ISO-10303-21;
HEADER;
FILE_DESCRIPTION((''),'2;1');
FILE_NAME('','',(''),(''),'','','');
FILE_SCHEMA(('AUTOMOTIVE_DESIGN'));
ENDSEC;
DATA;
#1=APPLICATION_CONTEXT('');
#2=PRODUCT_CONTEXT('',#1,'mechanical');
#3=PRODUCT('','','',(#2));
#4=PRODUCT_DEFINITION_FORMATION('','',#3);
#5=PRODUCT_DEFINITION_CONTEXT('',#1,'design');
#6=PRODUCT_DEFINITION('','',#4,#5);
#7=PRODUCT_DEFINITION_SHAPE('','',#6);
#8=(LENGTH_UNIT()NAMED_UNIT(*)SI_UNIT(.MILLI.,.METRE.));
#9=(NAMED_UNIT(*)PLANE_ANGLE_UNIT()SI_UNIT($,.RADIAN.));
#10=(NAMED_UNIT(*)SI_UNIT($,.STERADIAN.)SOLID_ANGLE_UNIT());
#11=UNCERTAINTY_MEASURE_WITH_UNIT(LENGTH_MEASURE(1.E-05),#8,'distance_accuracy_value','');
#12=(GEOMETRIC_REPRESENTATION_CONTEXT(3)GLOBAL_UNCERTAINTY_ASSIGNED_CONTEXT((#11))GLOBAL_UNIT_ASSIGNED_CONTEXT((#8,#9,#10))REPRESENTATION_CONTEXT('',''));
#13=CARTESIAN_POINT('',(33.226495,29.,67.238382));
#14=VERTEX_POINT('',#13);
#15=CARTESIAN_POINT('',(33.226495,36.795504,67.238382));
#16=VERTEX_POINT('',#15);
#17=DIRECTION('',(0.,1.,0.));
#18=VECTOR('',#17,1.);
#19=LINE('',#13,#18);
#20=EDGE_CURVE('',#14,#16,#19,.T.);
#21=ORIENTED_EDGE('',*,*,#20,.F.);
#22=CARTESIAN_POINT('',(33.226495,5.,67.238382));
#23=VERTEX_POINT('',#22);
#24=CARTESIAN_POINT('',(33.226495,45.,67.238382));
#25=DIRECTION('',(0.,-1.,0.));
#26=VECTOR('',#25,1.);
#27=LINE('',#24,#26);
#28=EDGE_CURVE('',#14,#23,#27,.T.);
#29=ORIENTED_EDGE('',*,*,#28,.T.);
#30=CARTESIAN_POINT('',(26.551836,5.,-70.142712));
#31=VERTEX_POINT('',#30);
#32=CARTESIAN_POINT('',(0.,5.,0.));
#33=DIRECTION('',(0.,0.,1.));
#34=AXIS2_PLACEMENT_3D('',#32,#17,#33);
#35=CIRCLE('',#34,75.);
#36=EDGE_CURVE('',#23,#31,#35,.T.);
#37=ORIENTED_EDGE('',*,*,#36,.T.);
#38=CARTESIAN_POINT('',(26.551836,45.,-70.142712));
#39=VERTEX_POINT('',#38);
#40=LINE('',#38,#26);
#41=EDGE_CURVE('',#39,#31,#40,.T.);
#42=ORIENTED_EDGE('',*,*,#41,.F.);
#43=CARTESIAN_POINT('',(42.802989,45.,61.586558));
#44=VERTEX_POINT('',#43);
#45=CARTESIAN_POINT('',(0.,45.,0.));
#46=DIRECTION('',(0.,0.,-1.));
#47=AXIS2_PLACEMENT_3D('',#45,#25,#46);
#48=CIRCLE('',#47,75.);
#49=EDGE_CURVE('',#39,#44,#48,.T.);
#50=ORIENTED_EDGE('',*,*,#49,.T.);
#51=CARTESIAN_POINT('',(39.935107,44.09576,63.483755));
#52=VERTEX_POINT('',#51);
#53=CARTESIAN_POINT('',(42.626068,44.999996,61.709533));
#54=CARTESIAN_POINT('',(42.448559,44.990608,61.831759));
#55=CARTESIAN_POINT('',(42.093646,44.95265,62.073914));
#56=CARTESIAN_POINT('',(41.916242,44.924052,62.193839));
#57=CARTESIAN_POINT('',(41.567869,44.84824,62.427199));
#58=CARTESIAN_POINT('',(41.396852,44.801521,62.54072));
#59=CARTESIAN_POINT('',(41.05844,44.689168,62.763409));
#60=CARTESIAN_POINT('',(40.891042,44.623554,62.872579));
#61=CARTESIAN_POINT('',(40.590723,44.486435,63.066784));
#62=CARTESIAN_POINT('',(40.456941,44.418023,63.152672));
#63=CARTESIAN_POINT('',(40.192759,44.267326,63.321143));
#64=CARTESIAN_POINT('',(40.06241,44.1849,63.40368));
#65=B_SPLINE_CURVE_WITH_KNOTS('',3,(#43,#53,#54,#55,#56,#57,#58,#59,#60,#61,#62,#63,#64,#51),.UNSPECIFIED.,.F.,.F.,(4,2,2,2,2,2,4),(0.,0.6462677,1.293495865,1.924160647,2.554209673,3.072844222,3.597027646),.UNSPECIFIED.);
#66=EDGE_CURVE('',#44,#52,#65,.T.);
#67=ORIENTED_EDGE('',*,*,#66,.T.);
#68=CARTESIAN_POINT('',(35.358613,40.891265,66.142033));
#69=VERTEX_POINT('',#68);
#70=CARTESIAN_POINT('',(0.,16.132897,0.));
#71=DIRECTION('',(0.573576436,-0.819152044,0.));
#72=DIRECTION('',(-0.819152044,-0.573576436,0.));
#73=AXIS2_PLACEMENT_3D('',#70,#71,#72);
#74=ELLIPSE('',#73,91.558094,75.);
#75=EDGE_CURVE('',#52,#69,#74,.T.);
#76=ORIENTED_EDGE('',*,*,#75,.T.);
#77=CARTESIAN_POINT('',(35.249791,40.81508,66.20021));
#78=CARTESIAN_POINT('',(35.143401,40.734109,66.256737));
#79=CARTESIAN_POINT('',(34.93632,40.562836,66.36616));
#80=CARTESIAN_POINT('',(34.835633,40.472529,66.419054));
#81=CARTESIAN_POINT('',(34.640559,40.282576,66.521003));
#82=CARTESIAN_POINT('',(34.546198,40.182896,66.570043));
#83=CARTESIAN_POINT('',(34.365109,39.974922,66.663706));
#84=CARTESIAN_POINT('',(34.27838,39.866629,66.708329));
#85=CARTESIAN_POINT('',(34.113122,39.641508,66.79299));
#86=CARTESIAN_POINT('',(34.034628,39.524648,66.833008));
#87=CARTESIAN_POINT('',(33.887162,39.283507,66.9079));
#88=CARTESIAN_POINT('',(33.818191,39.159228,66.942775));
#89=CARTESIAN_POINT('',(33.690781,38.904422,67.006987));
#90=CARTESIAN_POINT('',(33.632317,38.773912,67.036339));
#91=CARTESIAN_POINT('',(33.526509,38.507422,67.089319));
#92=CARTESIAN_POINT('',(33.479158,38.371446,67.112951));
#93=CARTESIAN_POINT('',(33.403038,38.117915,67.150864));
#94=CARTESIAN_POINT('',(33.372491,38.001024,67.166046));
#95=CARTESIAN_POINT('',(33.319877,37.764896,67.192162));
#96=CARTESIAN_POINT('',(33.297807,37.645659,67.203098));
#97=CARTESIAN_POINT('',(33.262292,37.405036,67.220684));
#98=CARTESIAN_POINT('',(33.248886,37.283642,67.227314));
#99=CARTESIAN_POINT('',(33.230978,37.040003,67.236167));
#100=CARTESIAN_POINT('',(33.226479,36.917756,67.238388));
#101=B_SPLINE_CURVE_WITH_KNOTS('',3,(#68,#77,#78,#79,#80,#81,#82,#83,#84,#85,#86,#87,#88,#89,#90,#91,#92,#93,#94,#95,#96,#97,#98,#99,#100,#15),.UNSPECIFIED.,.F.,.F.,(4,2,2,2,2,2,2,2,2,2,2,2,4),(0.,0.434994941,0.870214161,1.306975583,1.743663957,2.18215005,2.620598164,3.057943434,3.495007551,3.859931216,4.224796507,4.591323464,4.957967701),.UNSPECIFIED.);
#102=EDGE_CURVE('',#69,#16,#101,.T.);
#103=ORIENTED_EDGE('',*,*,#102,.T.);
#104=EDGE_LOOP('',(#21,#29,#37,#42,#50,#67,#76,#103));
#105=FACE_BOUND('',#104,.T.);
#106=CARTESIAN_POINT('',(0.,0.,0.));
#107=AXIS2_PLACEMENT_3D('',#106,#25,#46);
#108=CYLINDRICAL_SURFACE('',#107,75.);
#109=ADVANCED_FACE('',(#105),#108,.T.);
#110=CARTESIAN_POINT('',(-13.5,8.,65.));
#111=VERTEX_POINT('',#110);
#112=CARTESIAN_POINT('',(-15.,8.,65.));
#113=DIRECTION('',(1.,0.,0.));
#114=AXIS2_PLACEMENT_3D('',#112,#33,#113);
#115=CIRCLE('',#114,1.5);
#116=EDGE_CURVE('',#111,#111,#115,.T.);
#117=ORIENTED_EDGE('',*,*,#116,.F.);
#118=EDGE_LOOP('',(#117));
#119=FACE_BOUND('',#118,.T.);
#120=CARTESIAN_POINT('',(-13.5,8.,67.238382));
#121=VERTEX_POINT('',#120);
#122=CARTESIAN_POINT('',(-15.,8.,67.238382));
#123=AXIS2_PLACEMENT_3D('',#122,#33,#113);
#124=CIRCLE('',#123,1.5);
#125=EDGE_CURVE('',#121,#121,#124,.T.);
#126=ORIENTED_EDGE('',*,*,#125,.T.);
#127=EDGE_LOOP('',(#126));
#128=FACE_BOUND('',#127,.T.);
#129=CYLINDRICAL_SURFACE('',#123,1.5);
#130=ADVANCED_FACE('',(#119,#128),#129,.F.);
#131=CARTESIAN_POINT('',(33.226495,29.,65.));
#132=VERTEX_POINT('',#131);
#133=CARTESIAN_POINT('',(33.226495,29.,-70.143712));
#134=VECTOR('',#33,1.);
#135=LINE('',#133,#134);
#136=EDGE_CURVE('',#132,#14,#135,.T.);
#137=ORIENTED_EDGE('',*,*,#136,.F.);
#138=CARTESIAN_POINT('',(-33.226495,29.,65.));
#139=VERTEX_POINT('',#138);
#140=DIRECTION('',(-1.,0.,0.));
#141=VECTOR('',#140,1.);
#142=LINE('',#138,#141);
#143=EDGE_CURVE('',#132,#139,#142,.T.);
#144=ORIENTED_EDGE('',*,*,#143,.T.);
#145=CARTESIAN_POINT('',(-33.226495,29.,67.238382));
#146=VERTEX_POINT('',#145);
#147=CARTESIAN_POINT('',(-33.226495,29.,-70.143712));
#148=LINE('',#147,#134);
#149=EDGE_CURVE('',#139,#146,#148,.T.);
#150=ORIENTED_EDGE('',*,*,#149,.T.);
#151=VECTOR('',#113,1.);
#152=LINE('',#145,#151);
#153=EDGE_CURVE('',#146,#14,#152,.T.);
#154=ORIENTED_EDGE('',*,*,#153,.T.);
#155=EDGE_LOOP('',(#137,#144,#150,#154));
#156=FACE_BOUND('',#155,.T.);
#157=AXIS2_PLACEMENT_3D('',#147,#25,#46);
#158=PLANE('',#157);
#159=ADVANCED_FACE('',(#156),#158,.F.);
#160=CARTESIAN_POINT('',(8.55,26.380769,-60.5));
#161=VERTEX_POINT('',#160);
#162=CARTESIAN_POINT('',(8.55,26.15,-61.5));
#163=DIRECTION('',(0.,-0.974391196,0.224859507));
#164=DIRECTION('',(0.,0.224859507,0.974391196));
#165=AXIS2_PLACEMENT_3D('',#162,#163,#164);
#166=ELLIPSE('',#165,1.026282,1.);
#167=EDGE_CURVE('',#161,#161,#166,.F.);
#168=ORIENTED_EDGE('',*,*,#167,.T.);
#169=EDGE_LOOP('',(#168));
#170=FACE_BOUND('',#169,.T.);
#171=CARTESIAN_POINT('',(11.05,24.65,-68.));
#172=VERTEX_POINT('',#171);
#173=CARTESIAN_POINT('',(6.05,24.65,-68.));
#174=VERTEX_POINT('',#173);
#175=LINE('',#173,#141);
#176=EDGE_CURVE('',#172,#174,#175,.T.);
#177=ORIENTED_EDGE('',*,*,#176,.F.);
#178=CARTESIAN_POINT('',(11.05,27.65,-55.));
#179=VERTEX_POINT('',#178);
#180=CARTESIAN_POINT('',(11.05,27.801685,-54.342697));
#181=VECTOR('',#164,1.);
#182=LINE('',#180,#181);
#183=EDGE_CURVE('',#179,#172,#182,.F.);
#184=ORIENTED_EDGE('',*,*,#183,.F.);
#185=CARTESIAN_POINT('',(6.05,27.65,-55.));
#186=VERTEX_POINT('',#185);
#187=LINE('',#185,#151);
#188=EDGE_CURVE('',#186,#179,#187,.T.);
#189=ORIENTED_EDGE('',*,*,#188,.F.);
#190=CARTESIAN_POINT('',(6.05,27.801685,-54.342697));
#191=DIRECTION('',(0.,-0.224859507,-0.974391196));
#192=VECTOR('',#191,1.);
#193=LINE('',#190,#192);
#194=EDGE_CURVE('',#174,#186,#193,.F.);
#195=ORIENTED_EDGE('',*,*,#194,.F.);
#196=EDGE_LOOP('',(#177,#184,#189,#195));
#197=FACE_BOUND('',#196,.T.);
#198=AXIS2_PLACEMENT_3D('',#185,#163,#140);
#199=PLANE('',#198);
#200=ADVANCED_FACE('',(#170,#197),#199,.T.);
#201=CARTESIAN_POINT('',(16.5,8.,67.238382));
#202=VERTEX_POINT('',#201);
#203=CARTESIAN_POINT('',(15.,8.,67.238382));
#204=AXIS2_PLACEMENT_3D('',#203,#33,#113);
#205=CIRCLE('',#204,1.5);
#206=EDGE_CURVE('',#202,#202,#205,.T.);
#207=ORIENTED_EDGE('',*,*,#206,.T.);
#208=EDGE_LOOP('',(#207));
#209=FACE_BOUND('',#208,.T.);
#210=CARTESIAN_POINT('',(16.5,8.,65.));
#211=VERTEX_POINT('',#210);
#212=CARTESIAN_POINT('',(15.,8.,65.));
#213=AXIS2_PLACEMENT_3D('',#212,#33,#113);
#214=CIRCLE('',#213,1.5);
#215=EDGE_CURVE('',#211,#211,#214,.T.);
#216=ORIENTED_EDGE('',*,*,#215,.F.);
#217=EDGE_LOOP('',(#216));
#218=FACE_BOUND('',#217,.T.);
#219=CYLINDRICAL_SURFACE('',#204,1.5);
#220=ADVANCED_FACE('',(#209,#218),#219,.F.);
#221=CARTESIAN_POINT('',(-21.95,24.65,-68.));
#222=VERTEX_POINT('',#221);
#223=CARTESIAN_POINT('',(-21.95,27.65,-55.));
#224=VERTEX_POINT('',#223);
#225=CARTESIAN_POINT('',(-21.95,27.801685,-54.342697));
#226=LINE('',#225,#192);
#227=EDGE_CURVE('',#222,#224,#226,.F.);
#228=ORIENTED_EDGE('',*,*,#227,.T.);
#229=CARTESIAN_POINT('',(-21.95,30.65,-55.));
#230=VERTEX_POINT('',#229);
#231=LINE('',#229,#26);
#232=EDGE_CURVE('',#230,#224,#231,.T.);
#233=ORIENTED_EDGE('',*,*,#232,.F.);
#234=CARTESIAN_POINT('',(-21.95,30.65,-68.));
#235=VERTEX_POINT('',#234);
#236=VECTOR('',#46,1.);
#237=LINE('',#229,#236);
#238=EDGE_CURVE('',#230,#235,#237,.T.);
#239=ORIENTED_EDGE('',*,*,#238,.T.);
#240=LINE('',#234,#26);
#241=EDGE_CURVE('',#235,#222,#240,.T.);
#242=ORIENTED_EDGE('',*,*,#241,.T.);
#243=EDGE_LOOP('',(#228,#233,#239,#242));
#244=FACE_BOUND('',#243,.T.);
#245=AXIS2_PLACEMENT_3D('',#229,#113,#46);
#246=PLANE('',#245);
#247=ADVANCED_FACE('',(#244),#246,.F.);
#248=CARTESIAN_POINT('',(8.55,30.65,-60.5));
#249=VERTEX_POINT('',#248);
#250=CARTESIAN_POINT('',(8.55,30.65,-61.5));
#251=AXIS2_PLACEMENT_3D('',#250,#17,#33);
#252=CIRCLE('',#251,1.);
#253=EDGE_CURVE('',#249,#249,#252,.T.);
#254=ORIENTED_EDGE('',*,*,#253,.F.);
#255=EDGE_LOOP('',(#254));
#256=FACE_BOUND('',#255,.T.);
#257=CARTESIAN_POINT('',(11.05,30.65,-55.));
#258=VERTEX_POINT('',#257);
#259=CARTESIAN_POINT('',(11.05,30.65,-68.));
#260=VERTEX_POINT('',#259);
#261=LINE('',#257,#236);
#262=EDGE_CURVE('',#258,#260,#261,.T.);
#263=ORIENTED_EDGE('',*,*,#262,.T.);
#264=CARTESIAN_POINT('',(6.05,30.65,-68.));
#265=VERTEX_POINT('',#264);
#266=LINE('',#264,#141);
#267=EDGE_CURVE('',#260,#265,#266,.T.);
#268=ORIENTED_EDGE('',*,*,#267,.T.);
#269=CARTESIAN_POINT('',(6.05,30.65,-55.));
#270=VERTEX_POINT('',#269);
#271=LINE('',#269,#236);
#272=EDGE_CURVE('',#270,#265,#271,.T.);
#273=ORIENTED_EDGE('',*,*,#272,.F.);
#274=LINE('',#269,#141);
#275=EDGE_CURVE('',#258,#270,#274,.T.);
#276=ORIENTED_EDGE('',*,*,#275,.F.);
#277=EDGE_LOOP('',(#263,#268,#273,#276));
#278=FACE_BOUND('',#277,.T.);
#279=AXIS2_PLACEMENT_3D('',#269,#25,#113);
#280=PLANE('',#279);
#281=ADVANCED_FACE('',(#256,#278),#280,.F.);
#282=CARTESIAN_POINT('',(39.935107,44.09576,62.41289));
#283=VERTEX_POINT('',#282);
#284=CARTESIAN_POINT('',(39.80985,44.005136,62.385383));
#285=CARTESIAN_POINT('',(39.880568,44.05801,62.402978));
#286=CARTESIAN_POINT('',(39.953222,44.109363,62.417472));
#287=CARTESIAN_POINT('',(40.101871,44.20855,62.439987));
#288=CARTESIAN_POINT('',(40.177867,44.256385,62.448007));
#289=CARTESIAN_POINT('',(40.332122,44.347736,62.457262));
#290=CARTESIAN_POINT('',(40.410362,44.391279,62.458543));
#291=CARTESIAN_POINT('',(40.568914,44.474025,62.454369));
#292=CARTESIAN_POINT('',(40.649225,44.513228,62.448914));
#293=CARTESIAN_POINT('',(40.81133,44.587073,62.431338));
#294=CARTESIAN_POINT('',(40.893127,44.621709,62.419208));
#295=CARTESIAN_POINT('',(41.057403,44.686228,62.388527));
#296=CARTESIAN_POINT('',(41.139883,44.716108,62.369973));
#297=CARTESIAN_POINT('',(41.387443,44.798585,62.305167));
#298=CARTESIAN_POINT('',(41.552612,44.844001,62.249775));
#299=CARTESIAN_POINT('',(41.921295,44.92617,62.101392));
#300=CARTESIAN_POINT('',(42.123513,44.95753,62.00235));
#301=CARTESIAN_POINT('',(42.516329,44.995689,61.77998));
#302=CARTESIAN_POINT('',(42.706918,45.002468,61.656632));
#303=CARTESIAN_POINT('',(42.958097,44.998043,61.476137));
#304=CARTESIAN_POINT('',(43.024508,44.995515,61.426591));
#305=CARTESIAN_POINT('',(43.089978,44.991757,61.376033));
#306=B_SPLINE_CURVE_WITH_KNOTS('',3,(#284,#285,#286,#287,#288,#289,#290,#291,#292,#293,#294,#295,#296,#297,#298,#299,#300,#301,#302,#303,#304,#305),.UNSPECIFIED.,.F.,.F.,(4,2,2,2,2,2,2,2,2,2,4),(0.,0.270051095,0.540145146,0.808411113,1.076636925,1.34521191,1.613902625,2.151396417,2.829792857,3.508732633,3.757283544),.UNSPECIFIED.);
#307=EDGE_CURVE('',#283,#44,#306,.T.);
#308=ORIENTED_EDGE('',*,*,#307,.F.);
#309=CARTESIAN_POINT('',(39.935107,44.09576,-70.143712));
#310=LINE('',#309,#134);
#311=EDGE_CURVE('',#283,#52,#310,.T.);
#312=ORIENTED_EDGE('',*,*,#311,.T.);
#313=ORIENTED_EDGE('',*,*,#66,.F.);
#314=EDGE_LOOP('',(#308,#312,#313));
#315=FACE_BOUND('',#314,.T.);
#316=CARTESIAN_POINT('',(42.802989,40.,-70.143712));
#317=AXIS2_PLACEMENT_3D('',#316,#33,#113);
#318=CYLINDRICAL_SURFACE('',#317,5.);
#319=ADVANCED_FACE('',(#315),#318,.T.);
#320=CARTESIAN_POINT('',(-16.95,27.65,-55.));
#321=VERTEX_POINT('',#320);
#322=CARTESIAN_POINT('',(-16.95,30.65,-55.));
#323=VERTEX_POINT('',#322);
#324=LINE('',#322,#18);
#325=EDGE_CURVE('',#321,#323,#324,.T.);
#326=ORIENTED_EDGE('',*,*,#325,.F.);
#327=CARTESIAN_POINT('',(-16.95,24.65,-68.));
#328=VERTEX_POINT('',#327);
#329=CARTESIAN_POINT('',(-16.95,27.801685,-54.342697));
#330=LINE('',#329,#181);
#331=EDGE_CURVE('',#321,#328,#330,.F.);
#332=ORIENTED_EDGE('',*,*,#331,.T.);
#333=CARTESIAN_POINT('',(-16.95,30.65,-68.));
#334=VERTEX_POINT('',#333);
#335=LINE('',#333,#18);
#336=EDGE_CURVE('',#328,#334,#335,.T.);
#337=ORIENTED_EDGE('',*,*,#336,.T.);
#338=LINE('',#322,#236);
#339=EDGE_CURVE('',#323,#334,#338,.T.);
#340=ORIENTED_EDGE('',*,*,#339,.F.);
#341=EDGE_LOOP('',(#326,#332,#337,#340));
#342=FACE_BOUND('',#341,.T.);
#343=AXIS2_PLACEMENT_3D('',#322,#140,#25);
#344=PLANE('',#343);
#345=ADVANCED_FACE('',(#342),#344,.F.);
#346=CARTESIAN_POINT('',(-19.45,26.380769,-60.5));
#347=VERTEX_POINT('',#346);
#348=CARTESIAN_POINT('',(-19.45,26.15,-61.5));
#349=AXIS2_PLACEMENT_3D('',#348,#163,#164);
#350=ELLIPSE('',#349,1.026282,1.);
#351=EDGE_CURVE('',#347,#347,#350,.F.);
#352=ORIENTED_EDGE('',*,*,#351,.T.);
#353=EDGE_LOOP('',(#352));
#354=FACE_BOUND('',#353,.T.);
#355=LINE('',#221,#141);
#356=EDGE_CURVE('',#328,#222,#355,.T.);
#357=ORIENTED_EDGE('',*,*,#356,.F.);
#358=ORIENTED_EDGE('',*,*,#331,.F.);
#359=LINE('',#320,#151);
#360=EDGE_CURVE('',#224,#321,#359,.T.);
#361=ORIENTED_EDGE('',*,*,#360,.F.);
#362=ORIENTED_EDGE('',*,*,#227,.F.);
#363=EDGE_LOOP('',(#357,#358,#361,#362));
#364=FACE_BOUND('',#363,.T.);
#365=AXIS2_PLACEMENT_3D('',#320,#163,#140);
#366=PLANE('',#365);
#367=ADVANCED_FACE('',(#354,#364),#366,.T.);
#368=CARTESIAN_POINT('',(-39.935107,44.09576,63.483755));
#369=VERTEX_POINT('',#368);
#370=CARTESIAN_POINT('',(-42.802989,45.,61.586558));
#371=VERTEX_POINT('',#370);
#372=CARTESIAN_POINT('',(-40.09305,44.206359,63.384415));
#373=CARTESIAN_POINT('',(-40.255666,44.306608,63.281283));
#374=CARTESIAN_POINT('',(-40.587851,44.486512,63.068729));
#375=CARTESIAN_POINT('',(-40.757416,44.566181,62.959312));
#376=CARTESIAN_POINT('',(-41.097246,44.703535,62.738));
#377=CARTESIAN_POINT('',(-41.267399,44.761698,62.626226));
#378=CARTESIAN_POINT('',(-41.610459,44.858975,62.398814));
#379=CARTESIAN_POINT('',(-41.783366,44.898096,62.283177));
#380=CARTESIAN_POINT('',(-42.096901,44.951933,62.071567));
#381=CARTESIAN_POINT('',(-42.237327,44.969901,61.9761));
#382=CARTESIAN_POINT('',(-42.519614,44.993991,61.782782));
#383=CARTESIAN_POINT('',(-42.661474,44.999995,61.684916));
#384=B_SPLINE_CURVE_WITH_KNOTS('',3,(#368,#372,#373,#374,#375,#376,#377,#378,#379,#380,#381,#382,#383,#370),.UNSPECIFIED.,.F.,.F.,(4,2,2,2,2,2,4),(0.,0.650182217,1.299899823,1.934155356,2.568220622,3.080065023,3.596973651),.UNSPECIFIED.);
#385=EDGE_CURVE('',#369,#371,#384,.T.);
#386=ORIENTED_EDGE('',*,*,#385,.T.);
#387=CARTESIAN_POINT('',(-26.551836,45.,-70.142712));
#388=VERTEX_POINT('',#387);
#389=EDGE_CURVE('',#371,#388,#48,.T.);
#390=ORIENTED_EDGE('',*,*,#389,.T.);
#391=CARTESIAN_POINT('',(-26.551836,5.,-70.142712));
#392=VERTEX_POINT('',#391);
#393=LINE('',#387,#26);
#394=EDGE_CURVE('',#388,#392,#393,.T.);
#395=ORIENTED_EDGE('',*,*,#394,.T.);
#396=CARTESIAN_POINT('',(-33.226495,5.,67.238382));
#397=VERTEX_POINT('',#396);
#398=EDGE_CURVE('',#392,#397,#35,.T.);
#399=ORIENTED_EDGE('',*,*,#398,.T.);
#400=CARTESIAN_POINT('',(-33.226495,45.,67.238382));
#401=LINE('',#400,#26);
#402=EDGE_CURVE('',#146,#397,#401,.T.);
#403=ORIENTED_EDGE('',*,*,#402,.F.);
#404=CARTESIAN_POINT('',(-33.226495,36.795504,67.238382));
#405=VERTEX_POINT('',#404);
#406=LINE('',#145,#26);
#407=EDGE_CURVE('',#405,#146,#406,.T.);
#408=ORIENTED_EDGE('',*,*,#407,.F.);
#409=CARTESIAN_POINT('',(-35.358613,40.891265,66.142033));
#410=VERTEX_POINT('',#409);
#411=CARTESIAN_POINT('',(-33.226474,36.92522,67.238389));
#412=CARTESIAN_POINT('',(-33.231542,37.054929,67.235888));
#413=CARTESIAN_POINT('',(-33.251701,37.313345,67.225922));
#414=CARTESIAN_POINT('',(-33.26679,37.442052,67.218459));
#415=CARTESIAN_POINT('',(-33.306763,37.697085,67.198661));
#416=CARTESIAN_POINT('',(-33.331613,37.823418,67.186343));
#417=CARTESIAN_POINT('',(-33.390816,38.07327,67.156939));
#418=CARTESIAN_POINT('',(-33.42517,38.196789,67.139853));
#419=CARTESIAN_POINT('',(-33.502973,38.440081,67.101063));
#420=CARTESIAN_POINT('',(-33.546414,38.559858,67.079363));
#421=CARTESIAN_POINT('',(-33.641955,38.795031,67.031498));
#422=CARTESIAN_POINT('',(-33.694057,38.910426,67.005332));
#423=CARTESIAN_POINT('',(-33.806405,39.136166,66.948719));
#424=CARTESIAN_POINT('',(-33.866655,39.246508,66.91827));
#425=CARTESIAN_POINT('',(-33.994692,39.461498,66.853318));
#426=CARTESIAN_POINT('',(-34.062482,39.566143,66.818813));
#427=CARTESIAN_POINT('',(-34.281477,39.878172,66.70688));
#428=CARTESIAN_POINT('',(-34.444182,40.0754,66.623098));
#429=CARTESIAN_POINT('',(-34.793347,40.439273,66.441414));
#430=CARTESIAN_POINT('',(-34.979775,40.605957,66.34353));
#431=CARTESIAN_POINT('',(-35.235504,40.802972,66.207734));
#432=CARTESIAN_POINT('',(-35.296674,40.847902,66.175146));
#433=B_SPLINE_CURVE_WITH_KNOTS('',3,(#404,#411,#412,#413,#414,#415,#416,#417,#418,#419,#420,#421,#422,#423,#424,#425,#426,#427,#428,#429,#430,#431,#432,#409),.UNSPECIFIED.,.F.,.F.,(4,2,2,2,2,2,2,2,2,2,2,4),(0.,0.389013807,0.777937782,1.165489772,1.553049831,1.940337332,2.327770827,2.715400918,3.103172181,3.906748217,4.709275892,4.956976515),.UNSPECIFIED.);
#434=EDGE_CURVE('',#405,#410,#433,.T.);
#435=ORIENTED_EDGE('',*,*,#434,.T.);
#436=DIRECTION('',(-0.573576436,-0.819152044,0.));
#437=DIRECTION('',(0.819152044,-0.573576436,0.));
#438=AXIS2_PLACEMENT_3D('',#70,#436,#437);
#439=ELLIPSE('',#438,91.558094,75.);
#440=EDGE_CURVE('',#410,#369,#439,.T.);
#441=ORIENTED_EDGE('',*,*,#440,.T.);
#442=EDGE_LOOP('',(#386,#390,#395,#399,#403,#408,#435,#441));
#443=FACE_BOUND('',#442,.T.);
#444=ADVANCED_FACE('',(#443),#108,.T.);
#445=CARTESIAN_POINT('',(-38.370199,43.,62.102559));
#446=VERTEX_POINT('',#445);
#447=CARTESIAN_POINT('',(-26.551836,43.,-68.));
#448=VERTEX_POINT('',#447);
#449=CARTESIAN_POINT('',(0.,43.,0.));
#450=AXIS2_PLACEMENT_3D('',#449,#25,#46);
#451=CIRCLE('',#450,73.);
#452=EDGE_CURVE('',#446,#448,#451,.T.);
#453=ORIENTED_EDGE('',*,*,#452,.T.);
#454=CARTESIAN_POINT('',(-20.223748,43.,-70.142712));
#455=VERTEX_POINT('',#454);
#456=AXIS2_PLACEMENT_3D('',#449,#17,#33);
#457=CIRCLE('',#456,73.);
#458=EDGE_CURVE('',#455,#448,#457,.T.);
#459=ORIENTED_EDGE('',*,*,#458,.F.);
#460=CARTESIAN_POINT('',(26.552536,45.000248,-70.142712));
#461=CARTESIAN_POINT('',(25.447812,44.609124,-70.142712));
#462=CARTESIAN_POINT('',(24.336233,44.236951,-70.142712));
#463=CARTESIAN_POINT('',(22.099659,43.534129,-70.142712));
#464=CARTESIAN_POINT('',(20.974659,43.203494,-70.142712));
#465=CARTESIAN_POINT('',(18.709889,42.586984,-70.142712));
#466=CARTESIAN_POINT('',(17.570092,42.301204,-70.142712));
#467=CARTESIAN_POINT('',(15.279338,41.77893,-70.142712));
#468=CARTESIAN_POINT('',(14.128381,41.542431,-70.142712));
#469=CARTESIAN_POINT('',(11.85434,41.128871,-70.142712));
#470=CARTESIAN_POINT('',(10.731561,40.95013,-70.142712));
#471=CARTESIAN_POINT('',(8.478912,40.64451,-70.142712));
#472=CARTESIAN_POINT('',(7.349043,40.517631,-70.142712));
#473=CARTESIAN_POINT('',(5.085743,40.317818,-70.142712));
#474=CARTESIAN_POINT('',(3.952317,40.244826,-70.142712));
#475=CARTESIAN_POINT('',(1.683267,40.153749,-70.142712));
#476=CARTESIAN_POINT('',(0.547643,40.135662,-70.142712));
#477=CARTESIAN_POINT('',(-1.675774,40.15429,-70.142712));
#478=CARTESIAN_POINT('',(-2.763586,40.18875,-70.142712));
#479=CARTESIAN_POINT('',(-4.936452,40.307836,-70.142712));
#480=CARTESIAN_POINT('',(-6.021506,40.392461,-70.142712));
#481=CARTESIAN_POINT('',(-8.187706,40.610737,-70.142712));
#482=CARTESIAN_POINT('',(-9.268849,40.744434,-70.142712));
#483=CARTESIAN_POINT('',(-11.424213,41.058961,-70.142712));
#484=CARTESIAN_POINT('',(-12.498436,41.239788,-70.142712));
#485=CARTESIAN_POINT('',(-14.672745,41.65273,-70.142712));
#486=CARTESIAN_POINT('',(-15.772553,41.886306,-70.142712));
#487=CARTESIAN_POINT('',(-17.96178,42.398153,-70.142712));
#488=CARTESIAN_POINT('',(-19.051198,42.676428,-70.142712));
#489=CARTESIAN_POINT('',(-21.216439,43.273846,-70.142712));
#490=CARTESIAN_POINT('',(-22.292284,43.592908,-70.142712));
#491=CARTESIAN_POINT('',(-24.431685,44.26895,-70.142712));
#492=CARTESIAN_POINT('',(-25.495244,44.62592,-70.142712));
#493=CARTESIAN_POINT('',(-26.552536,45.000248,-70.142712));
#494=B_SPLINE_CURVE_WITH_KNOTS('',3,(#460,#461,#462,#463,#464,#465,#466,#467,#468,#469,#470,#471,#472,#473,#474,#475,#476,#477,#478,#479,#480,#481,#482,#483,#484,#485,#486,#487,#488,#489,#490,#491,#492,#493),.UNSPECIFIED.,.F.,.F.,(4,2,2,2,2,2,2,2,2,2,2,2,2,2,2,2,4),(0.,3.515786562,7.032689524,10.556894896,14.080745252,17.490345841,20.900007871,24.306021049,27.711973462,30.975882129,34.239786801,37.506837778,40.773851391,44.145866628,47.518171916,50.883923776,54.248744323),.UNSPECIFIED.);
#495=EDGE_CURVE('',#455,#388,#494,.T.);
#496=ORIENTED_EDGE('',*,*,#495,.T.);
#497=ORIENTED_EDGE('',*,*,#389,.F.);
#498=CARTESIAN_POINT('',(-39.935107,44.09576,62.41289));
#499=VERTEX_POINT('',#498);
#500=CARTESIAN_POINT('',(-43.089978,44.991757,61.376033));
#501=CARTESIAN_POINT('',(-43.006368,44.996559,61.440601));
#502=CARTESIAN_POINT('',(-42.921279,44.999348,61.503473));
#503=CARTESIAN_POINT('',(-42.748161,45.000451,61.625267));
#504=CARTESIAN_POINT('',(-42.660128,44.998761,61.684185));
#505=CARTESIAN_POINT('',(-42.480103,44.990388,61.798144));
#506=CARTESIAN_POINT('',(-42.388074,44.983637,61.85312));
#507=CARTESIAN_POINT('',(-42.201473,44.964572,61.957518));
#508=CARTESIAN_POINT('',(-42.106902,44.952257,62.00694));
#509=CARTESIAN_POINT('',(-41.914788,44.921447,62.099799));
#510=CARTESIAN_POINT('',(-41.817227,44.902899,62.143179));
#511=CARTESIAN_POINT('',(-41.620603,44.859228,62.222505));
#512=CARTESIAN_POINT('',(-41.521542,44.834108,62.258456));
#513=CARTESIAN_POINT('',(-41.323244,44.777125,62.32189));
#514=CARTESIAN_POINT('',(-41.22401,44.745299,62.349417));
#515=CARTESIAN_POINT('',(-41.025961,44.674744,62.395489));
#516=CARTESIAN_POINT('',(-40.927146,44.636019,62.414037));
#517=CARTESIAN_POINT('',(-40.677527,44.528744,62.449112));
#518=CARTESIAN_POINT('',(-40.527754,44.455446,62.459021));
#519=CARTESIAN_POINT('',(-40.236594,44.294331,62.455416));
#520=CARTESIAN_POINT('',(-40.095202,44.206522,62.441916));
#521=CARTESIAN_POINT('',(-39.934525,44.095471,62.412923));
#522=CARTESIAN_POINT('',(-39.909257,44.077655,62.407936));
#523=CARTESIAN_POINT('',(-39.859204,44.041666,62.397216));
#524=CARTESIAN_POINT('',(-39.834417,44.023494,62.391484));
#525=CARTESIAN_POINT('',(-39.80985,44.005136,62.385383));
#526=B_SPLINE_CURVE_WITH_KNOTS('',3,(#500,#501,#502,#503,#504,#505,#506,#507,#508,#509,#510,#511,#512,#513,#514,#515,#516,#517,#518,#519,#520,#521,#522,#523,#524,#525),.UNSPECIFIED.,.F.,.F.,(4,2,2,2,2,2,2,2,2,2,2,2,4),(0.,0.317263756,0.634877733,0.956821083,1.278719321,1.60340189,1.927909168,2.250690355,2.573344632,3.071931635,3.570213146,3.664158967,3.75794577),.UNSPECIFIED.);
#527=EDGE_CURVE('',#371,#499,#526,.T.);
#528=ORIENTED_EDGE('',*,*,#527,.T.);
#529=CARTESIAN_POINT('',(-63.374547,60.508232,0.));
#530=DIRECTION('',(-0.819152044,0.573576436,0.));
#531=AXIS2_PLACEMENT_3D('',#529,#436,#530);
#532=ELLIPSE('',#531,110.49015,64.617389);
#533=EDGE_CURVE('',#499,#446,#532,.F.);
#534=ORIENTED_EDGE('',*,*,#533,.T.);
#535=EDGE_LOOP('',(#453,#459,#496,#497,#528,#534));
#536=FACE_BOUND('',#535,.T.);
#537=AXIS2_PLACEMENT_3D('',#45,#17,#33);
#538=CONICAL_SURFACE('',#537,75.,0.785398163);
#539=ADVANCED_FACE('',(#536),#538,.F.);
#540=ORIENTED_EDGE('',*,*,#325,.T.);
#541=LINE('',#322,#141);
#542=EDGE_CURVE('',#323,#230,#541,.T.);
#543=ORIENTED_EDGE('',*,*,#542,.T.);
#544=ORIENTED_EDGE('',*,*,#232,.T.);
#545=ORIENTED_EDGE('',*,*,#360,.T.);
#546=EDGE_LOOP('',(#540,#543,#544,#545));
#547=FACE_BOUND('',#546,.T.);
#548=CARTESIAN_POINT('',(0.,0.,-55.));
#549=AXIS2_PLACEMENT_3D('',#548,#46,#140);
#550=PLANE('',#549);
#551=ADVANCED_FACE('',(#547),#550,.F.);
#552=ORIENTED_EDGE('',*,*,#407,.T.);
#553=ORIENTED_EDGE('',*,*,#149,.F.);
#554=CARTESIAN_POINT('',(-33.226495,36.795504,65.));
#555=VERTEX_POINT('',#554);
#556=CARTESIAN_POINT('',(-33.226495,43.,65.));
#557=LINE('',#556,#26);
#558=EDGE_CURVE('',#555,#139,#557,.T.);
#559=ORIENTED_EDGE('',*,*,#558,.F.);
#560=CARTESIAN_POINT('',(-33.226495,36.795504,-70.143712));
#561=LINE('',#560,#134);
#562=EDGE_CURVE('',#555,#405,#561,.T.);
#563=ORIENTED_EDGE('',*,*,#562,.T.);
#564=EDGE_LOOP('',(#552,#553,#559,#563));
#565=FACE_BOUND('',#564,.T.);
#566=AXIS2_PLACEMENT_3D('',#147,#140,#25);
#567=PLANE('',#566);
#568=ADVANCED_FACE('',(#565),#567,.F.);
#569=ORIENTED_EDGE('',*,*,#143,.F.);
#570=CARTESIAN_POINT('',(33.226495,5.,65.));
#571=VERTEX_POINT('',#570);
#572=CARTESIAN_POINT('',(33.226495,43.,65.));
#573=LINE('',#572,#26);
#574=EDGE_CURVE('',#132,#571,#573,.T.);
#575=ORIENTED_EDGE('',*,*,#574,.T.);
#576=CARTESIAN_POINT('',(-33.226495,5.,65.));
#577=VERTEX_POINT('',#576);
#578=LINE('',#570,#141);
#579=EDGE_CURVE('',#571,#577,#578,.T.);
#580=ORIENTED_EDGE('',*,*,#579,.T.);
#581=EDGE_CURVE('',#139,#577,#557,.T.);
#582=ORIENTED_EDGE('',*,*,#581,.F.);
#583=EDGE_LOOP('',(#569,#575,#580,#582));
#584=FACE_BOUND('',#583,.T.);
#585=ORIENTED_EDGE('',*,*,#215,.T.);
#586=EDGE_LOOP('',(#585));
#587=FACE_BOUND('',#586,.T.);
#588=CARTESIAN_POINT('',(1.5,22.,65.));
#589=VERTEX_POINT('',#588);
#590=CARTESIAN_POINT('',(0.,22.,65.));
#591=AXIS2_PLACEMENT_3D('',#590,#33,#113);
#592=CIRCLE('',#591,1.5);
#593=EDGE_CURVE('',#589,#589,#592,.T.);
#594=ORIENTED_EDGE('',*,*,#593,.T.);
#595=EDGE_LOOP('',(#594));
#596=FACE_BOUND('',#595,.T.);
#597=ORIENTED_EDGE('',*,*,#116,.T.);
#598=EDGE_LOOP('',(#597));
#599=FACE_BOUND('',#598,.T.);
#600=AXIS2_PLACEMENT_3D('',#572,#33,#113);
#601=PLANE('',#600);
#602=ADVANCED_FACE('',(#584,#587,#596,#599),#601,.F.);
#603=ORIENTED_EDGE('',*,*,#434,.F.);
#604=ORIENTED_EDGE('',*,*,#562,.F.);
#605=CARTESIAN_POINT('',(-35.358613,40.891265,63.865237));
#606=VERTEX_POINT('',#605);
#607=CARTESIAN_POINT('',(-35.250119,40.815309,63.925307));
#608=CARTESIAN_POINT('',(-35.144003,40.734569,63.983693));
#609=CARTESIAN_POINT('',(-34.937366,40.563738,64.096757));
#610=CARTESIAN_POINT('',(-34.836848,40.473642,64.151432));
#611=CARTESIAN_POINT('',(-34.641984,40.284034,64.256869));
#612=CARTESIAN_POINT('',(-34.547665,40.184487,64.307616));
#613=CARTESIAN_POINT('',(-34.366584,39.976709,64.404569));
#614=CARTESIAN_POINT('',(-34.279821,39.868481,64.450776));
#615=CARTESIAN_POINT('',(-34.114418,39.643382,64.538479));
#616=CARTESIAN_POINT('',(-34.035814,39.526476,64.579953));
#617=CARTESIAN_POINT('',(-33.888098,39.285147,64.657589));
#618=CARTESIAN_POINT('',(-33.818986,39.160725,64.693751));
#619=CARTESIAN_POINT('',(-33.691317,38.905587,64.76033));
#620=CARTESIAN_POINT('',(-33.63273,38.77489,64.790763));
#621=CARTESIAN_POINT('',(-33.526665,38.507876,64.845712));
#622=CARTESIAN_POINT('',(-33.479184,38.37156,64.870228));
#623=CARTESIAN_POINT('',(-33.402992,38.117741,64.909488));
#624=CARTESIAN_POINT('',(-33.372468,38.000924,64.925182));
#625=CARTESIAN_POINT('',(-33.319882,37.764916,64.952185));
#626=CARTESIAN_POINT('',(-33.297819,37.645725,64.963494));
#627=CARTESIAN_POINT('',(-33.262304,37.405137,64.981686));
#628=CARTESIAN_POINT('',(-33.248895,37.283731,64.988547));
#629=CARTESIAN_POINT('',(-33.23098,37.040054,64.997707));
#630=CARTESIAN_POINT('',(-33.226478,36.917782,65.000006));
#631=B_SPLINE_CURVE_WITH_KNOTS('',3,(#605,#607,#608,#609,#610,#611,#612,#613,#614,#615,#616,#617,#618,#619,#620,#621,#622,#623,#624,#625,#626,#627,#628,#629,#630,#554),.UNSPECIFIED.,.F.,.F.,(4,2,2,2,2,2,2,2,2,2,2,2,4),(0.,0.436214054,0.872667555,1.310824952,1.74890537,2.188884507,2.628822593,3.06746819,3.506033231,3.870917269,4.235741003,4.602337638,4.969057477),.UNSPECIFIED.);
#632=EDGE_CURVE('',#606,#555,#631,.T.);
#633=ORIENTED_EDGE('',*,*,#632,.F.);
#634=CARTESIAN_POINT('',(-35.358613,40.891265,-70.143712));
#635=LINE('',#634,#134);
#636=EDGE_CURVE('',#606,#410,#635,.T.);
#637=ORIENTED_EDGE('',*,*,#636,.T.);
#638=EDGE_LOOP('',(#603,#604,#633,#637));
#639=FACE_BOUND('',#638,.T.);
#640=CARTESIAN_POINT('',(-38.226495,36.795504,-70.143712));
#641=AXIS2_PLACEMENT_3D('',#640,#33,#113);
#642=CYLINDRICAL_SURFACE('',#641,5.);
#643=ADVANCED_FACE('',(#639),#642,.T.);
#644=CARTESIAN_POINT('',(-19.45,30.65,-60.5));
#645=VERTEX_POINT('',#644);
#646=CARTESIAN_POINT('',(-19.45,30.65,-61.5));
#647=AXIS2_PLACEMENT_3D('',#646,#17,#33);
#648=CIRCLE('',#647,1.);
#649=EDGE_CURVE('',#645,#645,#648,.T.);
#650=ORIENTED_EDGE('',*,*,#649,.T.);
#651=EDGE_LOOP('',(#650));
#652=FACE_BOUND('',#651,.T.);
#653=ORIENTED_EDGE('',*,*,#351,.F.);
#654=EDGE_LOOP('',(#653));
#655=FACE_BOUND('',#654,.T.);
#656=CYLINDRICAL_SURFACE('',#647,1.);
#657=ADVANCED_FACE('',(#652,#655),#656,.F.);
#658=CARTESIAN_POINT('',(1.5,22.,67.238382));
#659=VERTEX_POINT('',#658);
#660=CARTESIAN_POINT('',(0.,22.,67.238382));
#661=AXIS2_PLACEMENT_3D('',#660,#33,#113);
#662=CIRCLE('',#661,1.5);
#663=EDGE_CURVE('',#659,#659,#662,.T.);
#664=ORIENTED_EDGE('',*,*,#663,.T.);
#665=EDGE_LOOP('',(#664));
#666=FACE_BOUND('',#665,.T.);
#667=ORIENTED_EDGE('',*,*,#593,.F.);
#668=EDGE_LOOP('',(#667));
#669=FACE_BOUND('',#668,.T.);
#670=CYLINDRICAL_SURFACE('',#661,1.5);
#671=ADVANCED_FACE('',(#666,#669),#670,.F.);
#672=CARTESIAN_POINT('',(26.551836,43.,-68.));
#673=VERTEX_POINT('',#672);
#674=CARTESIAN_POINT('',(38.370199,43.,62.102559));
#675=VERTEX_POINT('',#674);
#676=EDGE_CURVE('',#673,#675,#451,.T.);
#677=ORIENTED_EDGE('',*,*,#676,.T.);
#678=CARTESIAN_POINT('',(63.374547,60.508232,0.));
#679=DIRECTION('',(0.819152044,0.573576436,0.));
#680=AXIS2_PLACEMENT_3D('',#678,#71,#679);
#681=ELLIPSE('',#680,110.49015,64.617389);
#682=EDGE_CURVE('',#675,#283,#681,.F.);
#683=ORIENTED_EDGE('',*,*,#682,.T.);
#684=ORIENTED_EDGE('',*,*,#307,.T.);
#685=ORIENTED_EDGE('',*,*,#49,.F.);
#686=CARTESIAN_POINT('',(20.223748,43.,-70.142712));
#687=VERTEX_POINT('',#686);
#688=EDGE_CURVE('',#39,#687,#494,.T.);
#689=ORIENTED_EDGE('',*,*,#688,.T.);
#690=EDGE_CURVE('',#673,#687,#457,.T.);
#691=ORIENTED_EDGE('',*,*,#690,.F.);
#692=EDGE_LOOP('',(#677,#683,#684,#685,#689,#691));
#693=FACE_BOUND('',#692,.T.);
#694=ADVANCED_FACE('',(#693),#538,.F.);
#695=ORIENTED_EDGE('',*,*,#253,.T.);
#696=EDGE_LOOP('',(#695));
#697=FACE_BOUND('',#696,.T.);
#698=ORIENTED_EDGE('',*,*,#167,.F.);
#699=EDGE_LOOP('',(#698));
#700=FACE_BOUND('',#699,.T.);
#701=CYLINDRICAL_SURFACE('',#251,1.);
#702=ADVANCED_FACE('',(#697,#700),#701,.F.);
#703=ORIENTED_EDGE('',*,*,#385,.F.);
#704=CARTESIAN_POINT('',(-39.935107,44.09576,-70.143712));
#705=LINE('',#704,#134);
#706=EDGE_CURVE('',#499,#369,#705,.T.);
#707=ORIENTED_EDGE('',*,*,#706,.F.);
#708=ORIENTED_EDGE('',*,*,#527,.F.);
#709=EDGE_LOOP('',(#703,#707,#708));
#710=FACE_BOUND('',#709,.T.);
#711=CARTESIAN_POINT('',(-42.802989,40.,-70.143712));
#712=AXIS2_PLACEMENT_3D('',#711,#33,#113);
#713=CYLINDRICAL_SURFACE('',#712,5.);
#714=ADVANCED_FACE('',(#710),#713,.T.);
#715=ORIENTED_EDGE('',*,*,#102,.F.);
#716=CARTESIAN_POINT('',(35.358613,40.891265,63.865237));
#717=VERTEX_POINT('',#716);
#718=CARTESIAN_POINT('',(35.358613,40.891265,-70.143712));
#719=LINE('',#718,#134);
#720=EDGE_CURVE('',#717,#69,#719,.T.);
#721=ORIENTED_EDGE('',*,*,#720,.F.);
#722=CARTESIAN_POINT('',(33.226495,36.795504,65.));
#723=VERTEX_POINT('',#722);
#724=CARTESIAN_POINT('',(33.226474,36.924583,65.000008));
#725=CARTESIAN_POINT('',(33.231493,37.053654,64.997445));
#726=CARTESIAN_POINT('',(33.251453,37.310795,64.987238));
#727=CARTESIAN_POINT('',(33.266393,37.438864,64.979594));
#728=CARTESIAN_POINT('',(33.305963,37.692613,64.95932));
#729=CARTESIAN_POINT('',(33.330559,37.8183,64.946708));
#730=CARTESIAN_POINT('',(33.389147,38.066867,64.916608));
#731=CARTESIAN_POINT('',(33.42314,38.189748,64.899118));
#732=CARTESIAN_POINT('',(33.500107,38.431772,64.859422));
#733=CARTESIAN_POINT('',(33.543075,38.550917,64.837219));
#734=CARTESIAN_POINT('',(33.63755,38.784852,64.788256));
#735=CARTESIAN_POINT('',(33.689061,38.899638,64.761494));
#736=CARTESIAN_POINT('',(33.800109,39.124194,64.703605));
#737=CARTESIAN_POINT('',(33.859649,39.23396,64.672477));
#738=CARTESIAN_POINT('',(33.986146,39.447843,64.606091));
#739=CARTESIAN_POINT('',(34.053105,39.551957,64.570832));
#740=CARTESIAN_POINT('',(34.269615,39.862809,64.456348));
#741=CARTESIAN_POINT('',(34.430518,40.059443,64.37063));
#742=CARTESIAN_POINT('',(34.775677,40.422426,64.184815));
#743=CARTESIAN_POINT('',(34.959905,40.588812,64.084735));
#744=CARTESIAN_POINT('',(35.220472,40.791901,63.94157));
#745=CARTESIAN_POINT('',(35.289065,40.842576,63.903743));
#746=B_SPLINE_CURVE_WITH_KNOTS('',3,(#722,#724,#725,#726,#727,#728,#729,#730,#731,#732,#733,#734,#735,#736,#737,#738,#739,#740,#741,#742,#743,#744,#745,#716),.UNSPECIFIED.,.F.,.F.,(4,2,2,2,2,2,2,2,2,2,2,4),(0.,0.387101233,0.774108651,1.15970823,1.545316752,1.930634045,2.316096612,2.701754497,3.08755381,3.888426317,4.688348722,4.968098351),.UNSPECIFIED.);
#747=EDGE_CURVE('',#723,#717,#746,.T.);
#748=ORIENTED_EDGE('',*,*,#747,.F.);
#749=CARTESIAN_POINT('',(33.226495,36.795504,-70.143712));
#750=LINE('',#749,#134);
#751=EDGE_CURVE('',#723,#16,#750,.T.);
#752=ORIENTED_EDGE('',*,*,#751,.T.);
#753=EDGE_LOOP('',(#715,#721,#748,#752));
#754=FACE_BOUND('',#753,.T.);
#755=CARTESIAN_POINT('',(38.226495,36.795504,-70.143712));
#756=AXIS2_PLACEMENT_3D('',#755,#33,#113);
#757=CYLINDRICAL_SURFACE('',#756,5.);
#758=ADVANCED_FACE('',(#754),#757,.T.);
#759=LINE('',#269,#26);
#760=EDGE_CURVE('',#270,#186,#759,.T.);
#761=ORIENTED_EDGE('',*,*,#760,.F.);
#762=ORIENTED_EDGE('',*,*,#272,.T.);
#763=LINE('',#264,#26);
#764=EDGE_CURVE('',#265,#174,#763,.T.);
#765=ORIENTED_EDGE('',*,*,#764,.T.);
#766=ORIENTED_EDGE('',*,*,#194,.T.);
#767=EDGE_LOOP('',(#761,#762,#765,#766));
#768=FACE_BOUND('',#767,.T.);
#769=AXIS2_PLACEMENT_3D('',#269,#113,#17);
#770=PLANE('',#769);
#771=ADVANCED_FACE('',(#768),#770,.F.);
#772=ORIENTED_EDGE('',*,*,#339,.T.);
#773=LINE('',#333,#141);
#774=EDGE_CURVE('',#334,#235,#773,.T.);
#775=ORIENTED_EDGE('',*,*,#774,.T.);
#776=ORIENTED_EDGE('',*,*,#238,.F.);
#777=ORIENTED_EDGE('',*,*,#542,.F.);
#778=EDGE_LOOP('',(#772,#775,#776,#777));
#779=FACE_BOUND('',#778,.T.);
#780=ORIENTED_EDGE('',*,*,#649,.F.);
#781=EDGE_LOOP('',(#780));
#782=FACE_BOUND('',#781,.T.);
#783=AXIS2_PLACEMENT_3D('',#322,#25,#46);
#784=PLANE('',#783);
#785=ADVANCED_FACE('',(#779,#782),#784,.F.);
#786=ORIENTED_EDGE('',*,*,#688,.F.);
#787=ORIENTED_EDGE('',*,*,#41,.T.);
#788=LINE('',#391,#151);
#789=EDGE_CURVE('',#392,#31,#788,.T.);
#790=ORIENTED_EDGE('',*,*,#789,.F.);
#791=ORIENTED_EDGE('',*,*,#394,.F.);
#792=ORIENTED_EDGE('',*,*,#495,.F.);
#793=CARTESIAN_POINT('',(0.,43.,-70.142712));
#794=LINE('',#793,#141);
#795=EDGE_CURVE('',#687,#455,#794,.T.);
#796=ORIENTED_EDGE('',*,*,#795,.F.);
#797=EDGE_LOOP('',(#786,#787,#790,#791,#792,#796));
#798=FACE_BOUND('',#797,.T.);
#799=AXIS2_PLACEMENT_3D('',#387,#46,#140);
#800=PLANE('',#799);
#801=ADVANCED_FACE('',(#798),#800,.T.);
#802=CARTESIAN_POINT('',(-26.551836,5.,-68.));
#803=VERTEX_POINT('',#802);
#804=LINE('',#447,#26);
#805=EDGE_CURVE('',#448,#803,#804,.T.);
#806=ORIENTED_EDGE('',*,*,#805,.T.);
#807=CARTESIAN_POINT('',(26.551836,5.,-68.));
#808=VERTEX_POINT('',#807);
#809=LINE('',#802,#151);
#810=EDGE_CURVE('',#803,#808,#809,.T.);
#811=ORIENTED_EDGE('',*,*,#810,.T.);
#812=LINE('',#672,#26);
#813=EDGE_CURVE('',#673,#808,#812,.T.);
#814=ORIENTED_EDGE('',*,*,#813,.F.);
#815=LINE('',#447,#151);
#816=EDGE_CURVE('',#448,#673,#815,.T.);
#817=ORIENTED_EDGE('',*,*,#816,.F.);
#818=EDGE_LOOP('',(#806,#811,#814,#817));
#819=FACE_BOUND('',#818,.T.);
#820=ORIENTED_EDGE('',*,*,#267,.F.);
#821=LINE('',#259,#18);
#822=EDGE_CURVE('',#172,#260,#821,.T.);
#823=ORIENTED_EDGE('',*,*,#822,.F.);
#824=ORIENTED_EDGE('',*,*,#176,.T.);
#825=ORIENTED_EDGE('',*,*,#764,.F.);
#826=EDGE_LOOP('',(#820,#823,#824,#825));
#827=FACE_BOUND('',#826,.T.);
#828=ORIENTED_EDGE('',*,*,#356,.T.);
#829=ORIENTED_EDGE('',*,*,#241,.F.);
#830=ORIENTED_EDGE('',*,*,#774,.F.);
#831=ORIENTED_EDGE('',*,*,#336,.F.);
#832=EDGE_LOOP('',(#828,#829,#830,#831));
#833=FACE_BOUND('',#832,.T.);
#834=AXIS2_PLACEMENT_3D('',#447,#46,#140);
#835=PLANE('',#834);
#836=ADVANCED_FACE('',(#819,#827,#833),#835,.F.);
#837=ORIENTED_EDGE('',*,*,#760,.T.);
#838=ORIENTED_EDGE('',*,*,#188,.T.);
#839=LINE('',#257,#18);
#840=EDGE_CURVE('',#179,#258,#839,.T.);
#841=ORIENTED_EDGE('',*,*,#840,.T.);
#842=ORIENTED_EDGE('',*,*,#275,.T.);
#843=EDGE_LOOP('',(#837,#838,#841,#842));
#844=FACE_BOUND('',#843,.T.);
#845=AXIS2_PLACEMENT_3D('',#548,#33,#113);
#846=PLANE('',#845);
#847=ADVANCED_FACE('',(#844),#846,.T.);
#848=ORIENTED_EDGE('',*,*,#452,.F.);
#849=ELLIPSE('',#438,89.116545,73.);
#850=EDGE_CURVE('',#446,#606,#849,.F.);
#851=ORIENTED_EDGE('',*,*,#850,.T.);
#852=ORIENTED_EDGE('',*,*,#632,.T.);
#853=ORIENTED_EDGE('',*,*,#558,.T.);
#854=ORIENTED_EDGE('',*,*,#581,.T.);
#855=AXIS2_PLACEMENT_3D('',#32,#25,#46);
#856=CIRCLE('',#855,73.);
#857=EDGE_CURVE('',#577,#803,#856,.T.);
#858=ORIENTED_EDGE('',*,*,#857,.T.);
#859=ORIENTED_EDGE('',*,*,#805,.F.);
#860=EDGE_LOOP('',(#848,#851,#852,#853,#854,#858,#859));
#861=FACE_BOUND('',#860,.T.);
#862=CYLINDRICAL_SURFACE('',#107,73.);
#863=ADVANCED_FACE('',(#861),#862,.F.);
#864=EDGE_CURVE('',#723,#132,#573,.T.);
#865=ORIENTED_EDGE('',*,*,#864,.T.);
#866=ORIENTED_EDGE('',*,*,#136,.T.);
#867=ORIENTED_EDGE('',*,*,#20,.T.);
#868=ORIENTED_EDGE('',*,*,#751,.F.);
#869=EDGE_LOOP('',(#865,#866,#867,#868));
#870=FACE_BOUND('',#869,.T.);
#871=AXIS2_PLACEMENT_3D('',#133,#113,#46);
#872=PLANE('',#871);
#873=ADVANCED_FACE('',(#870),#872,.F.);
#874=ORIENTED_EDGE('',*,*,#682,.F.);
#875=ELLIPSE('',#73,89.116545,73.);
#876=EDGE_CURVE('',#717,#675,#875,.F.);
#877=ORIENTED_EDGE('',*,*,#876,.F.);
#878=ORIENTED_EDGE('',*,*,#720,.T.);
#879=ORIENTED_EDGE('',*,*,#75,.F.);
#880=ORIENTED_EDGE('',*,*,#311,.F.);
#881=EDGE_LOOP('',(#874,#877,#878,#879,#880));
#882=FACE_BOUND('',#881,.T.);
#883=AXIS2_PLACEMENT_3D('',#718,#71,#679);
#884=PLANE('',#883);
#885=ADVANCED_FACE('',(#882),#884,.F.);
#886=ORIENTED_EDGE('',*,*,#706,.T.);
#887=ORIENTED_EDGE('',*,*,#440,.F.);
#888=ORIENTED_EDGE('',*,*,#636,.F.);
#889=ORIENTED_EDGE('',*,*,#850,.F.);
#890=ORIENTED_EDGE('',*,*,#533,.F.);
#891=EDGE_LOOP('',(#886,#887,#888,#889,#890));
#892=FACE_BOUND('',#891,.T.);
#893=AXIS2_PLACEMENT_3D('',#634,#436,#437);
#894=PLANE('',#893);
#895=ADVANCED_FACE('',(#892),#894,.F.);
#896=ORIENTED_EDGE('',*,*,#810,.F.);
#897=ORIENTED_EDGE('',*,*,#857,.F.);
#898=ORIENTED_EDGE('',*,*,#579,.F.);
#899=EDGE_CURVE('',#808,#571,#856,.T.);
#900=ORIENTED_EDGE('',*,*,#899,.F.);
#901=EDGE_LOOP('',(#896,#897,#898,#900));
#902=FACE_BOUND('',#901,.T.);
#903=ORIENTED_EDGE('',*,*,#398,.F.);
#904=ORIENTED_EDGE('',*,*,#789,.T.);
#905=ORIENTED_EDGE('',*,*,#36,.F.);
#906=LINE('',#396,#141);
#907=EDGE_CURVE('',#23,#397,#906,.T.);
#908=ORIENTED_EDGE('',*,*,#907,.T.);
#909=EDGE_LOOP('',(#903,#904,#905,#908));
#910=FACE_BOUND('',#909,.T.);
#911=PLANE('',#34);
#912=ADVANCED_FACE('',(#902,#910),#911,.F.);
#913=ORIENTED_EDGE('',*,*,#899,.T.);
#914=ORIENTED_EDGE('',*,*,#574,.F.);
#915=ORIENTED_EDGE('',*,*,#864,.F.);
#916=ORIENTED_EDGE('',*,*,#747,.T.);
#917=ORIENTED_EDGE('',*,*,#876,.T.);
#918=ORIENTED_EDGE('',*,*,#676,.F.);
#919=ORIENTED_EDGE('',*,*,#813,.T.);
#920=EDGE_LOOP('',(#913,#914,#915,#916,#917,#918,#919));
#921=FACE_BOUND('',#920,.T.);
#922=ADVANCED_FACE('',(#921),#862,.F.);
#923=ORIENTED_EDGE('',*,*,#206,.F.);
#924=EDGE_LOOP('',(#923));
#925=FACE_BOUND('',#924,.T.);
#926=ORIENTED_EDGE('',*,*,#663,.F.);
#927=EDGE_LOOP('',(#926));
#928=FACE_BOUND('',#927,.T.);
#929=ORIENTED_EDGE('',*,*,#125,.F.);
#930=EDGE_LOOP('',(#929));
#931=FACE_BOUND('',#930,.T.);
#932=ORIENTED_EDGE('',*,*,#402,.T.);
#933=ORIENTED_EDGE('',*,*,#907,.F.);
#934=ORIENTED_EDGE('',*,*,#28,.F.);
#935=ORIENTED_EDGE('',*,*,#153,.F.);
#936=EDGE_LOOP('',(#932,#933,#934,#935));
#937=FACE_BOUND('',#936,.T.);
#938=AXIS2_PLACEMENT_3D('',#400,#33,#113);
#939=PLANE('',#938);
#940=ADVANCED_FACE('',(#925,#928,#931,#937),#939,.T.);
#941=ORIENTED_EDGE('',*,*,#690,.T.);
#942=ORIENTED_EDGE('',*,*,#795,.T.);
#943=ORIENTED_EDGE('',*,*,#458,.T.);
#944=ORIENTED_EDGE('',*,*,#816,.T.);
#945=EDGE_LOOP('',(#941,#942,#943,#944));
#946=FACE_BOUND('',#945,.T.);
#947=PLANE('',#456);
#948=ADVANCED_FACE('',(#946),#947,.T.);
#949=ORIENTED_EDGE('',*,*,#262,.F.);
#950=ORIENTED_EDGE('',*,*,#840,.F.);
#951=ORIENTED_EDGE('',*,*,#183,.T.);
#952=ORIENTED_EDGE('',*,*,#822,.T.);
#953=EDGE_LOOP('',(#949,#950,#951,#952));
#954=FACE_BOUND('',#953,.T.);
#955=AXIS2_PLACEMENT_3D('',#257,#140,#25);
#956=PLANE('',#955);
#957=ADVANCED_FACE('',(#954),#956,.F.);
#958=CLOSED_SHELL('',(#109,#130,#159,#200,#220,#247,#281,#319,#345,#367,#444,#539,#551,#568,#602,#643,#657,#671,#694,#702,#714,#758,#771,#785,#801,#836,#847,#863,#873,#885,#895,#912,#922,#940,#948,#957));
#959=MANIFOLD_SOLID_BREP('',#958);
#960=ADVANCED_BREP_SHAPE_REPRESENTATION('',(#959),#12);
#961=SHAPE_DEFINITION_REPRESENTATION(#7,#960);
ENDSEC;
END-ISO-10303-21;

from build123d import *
from OCP.BRepFilletAPI import BRepFilletAPI_MakeChamfer

# Parameters (mm, degrees)
BOSS_EXTRUDE10_DEPTH             = 38
CUT_EXTRUDE7_DEPTH               = 114.357840488
CUT_EXTRUDE7_DEPTH_BACK          = 114.357840488
CUT_EXTRUDE8_REACH               = 164.861
SKETCH44_W                       = 5
SKETCH44_H                       = 3
BOSS_EXTRUDE11_DEPTH             = 13
CHAMFER11_SIZE                   = 3
CHAMFER11_SIZE_2                 = 13
F_2_0_START                      = 25.919230669
F_2_0_2_DIAMETER_HOLE1_OUTLINE_R = 1
F_2_0_2_DIAMETER_HOLE1_DEPTH     = 4.730769331
M4_CLEARANCE_HOLE1_D             = 4.5
F_6_0_6_DIAMETER_HOLE1_D         = 6
FILLET33_R                       = 1
F_3_0_3_DIAMETER_HOLE2_D         = 3
F_3_0_3_DIAMETER_HOLE2_DEPTH     = 2.238381896
SKETCH53_R                       = 75
CUT_EXTRUDE9_DEPTH               = 111.204355799


# Read off the part's stored shape, not the designer's step: Ø2.0 (2) Diameter Hole1
with BuildPart() as part:
    # Sketch34 → Revolve1 (revolve)
    with BuildSketch(Plane.XY, mode=Mode.PRIVATE) as revolve1_sk:
        Polygon((5, 0), (75, 0), (75, 45), (73, 43), (73, 5), (5, 5), align=None)
    revolve(revolve1_sk.sketch.rotate(Axis((0, 0, 0), (0, 1, 0)), 90), axis=Axis((0, 0, 0), (0, 1, 0)))

    # Sketch35 → Boss-Extrude10 (add)
    with BuildSketch(Plane(origin=(0, 5, 0), x_dir=(1, 0, 0), z_dir=(0, 1, 0))):
        with BuildLine():
            Line((-26.551836095, 68), (26.551836095, 68))
            ThreePointArc((26.551836095, 68), (0, 73), (-26.551836095, 68))
        make_face()
        with BuildLine():
            Line((33.226495452, -65), (-33.226495452, -65))
            ThreePointArc((-33.226495452, -65), (0, -73), (33.226495452, -65))
        make_face()
    extrude(amount=BOSS_EXTRUDE10_DEPTH)

    # Sketch36 → Cut-Extrude7 (cut, two sides: drawn at the far end of the back side and taken through both)
    with BuildSketch(Plane(origin=(0, 5, 0), x_dir=(1, 0, 0), z_dir=(0, 1, 0)).offset(-CUT_EXTRUDE7_DEPTH_BACK)):
        with BuildLine():
            Line((-26.551836095, 70.142711667), (26.551836095, 70.142711667))
            ThreePointArc((26.551836095, 70.142711667), (0, 75), (-26.551836095, 70.142711667))
        make_face()
        with BuildLine():
            Line((-33.226495452, -67.238381896), (33.226495452, -67.238381896))
            ThreePointArc((33.226495452, -67.238381896), (0, -75), (-33.226495452, -67.238381896))
        make_face()
    extrude(amount=CUT_EXTRUDE7_DEPTH + CUT_EXTRUDE7_DEPTH_BACK, mode=Mode.SUBTRACT)

    # Sketch43 → Cut-Extrude8 (cut, up to next)
    with BuildSketch(Plane.XY.offset(67.238381896), mode=Mode.PRIVATE) as cut_extrude8_sk1:
        with BuildLine():
            Line((-33.226495452, 29), (33.226495452, 29))
            Line((33.226495452, 29), (33.226495452, 36.795504442))
            ThreePointArc((33.226495452, 36.795504442), (33.791441286, 39.104247508), (35.35861327, 40.891264663))
            Line((35.35861327, 40.891264663), (39.935107214, 44.095760221))
            ThreePointArc((39.935107214, 44.095760221), (41.299460399, 44.768584754), (42.802989396, 45))
            Line((42.802989396, 45), (-42.802989396, 45))
            ThreePointArc((-42.802989396, 45), (-41.299460399, 44.768584754), (-39.935107214, 44.095760221))
            Line((-39.935107214, 44.095760221), (-35.35861327, 40.891264663))
            ThreePointArc((-35.35861327, 40.891264663), (-33.791441286, 39.104247508), (-33.226495452, 36.795504442))
            Line((-33.226495452, 36.795504442), (-33.226495452, 29))
        make_face()
    cut_extrude8_tool1 = extrude(cut_extrude8_sk1.sketch, amount=-CUT_EXTRUDE8_REACH, mode=Mode.PRIVATE) & part.part
    add(cut_extrude8_tool1.solids().sort_by_distance((0, 37.254898, 67.238382))[0], mode=Mode.SUBTRACT)

    # Sketch44 → Boss-Extrude11 (add)
    with BuildSketch(Plane.XY.offset(-68)):
        with Locations((-19.45, 29.15)):
            Rectangle(SKETCH44_W, SKETCH44_H)
        with Locations((8.55, 29.15)):
            Rectangle(SKETCH44_W, SKETCH44_H)
    extrude(amount=BOSS_EXTRUDE11_DEPTH)

    # Chamfer11
    chamfer11_edges_1 = [part.edges().sort_by_distance(p)[0] for p in [
        (8.55, 27.65, -68),
    ]]
    chamfer11_side_1 = [part.faces().sort_by_distance(p)[0] for p in [
        (8.55, 27.59, -68),
    ]]
    chamfer11_edges_2 = [part.edges().sort_by_distance(p)[0] for p in [
        (-19.45, 27.65, -68),
    ]]
    chamfer11_side_2 = [part.faces().sort_by_distance(p)[0] for p in [
        (-19.45, 27.59, -68),
    ]]
    chamfer11 = BRepFilletAPI_MakeChamfer(part.part.solid().wrapped)
    for e in chamfer11_edges_1:
        chamfer11.Add(CHAMFER11_SIZE - 0.0001, CHAMFER11_SIZE_2 - 0.0001, e.wrapped, chamfer11_side_1[0].wrapped)
    for e in chamfer11_edges_2:
        chamfer11.Add(CHAMFER11_SIZE - 0.0001, CHAMFER11_SIZE_2 - 0.0001, e.wrapped, chamfer11_side_2[0].wrapped)
    add(Compound.cast(chamfer11.Shape()), mode=Mode.REPLACE)  # a hair under: the kernel refuses the full size

    # Ø2.0 (2) Diameter Hole1 outline → Ø2.0 (2) Diameter Hole1 (cut)
    with BuildSketch(Plane(origin=(0, 0, 0), x_dir=(1, 0, 0), z_dir=(0, 1, 0)).offset(F_2_0_START)):
        with Locations((8.55, 61.5)):
            Circle(F_2_0_2_DIAMETER_HOLE1_OUTLINE_R)
        with Locations((-19.45, 61.5)):
            Circle(F_2_0_2_DIAMETER_HOLE1_OUTLINE_R)
    extrude(amount=F_2_0_2_DIAMETER_HOLE1_DEPTH, mode=Mode.SUBTRACT)

    # M4 Clearance Hole1 (through all)
    with Locations(Plane(origin=(0, 5, 0), x_dir=(1, 0, 0), z_dir=(0, 1, 0))):
        with Locations((-55, 0), (55, 0), (0, 55), (0, -55)):
            Hole(M4_CLEARANCE_HOLE1_D / 2)

    # Ø6.0 (6) Diameter Hole1 (through all)
    with Locations(Plane(origin=(0, 5, 0), x_dir=(1, 0, 0), z_dir=(0, 1, 0))):
        with Locations((30.0520382, 40.658639918), (40.658639918, 30.0520382), (40.658639918, -30.0520382), (30.0520382, -40.658639918), (-30.0520382, -40.658639918), (-40.658639918, -30.0520382), (-40.658639918, 30.0520382), (-30.0520382, 40.658639918)):
            Hole(F_6_0_6_DIAMETER_HOLE1_D / 2)

    # Fillet33
    fillet33_edges = [part.edges().sort_by_distance(p)[0] for p in [
        (-27.0520382, 5, -40.658639918),
        (-27.0520382, 0, -40.658639918),
        (-37.658639918, 5, -30.0520382),
        (-37.658639918, 0, -30.0520382),
        (-37.658639918, 5, 30.0520382),
        (-37.658639918, 0, 30.0520382),
        (-27.0520382, 5, 40.658639918),
        (-27.0520382, 0, 40.658639918),
        (33.0520382, 5, 40.658639918),
        (33.0520382, 0, 40.658639918),
        (43.658639918, 5, 30.0520382),
        (43.658639918, 0, 30.0520382),
        (43.658639918, 5, -30.0520382),
        (43.658639918, 0, -30.0520382),
        (33.0520382, 5, -40.658639918),
        (33.0520382, 0, -40.658639918),
    ]]
    fillet(fillet33_edges, radius=FILLET33_R)

    # Ø3.0 (3) Diameter Hole2
    with Locations(Plane.XY.offset(67.238381896)):
        with Locations((0, 22), (-15, 8), (15, 8)):
            Hole(F_3_0_3_DIAMETER_HOLE2_D / 2, depth=F_3_0_3_DIAMETER_HOLE2_DEPTH)

    # Sketch53 → Cut-Extrude9 (cut, through all)
    with BuildSketch(Plane(origin=(0, 5, 0), x_dir=(1, 0, 0), z_dir=(0, 1, 0))):
        Circle(SKETCH53_R)
    extrude(amount=-CUT_EXTRUDE9_DEPTH, mode=Mode.SUBTRACT)


solid = part.part
